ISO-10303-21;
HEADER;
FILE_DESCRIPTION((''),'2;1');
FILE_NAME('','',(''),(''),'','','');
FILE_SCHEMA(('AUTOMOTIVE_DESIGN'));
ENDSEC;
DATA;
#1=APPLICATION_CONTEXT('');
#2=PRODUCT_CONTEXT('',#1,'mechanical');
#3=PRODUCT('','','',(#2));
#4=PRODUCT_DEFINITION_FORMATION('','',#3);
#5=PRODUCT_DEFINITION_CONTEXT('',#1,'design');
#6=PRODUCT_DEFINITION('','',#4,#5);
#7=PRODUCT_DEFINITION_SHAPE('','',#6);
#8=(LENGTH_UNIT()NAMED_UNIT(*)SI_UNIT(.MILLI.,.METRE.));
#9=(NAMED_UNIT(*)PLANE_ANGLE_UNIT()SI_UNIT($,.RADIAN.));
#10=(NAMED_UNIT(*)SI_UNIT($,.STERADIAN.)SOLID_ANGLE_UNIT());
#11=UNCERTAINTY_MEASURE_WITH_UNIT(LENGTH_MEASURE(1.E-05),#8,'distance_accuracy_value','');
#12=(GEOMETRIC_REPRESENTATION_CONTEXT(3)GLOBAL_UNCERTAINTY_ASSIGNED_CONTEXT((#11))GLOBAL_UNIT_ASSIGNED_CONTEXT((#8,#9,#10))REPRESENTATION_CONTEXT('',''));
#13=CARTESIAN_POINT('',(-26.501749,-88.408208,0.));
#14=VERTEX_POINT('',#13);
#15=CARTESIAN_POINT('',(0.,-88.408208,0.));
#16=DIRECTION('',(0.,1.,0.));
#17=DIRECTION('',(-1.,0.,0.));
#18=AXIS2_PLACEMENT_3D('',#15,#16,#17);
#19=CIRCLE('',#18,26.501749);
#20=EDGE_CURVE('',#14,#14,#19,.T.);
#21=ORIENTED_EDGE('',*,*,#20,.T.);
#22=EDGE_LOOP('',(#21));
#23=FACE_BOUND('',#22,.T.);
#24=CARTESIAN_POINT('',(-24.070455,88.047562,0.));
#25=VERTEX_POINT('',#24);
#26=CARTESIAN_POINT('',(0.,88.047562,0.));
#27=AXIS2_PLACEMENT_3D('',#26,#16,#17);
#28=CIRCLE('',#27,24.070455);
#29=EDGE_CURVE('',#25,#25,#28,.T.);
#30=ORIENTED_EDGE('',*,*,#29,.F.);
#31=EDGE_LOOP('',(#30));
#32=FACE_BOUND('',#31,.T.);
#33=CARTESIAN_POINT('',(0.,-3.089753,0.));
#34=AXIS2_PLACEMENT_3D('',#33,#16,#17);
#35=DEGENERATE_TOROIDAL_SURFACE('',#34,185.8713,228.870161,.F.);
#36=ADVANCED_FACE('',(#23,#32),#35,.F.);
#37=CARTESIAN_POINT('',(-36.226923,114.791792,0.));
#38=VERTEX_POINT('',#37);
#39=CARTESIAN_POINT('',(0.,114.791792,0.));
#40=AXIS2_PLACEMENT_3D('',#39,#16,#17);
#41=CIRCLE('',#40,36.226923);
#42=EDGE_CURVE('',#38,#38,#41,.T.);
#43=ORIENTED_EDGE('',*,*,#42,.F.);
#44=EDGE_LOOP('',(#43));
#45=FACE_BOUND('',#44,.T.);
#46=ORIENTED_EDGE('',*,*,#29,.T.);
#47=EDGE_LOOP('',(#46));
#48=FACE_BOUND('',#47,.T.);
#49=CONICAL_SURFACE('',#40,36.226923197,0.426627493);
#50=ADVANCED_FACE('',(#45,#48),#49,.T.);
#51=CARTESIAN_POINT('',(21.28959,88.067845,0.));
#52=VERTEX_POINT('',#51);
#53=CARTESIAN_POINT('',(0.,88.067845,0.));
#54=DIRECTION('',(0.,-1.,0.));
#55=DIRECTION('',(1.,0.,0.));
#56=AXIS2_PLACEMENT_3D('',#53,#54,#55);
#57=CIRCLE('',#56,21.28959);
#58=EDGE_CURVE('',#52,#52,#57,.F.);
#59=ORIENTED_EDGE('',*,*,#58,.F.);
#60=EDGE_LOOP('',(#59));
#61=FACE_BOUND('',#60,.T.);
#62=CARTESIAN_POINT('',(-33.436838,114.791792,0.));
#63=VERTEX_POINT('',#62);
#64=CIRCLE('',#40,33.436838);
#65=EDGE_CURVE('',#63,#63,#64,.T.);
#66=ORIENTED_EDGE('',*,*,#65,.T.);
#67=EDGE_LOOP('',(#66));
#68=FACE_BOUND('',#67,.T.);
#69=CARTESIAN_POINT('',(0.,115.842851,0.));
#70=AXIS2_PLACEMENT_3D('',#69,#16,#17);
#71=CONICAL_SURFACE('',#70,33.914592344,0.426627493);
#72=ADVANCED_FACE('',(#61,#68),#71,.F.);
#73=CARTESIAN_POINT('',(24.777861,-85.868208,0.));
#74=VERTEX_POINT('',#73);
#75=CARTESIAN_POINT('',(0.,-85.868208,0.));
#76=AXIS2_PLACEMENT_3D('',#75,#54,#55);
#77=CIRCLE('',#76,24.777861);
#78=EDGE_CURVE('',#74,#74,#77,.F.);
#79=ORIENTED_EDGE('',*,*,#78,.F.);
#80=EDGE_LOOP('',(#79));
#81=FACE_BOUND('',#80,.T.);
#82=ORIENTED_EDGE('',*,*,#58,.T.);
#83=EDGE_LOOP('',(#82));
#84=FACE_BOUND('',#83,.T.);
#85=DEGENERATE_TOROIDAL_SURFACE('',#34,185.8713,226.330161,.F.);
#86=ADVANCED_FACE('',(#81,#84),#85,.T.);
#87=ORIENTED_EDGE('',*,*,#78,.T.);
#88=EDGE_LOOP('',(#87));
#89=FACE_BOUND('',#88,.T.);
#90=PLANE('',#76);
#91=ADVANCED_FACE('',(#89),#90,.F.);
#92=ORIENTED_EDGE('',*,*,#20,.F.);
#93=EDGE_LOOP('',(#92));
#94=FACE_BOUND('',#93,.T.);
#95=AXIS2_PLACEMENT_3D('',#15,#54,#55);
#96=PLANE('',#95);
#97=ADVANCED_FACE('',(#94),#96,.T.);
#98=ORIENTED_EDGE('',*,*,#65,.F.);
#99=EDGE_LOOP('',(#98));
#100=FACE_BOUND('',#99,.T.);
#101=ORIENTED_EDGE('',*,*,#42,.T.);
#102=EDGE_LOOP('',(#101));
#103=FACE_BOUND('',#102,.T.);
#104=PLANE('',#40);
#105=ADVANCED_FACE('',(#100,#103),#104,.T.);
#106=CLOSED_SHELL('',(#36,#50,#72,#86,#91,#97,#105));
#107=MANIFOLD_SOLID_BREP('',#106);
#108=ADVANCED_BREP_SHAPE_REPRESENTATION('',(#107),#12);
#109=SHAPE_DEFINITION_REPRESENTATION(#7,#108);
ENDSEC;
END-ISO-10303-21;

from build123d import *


# Read off the part's stored shape, not the designer's step: Shell1
with BuildPart() as part:
    # Sketch2 → Revolve1 (revolve)
    with BuildSketch(Plane.XY):
        with BuildLine():
            Line((0, 114.791792001), (-36.226923197, 114.791792001))
            Line((-36.226923197, 114.791792001), (-24.070455057, 88.047562095))
            ThreePointArc((-24.070455057, 88.047562095), (-42.977139074, 0.063432784), (-26.501748685, -88.408207999))
            Line((-26.501748685, -88.408207999), (0, -88.408207999))
            Line((0, -88.408207999), (0, 114.791792001))
        make_face()
    revolve(axis=Axis((0, 114.791792001, 0), (0, -1, 0)))

    # Shell1 outline → Shell1 (revolve, cut)
    with BuildSketch(Plane.XY):
        with BuildLine():
            Line((21.28958956, 88.067845354), (33.436838036, 114.791792001))
            Line((33.436838036, 114.791792001), (0, 114.791792001))
            Line((0, 114.791792001), (0, -85.868207999))
            Line((0, -85.868207999), (24.777861268, -85.868207999))
            ThreePointArc((24.777861268, -85.868207999), (40.413359906, 1.448365664), (21.28958956, 88.067845354))
        make_face()
    revolve(axis=Axis((0, 0, 0), (0, 1, 0)), mode=Mode.SUBTRACT)


solid = part.part
